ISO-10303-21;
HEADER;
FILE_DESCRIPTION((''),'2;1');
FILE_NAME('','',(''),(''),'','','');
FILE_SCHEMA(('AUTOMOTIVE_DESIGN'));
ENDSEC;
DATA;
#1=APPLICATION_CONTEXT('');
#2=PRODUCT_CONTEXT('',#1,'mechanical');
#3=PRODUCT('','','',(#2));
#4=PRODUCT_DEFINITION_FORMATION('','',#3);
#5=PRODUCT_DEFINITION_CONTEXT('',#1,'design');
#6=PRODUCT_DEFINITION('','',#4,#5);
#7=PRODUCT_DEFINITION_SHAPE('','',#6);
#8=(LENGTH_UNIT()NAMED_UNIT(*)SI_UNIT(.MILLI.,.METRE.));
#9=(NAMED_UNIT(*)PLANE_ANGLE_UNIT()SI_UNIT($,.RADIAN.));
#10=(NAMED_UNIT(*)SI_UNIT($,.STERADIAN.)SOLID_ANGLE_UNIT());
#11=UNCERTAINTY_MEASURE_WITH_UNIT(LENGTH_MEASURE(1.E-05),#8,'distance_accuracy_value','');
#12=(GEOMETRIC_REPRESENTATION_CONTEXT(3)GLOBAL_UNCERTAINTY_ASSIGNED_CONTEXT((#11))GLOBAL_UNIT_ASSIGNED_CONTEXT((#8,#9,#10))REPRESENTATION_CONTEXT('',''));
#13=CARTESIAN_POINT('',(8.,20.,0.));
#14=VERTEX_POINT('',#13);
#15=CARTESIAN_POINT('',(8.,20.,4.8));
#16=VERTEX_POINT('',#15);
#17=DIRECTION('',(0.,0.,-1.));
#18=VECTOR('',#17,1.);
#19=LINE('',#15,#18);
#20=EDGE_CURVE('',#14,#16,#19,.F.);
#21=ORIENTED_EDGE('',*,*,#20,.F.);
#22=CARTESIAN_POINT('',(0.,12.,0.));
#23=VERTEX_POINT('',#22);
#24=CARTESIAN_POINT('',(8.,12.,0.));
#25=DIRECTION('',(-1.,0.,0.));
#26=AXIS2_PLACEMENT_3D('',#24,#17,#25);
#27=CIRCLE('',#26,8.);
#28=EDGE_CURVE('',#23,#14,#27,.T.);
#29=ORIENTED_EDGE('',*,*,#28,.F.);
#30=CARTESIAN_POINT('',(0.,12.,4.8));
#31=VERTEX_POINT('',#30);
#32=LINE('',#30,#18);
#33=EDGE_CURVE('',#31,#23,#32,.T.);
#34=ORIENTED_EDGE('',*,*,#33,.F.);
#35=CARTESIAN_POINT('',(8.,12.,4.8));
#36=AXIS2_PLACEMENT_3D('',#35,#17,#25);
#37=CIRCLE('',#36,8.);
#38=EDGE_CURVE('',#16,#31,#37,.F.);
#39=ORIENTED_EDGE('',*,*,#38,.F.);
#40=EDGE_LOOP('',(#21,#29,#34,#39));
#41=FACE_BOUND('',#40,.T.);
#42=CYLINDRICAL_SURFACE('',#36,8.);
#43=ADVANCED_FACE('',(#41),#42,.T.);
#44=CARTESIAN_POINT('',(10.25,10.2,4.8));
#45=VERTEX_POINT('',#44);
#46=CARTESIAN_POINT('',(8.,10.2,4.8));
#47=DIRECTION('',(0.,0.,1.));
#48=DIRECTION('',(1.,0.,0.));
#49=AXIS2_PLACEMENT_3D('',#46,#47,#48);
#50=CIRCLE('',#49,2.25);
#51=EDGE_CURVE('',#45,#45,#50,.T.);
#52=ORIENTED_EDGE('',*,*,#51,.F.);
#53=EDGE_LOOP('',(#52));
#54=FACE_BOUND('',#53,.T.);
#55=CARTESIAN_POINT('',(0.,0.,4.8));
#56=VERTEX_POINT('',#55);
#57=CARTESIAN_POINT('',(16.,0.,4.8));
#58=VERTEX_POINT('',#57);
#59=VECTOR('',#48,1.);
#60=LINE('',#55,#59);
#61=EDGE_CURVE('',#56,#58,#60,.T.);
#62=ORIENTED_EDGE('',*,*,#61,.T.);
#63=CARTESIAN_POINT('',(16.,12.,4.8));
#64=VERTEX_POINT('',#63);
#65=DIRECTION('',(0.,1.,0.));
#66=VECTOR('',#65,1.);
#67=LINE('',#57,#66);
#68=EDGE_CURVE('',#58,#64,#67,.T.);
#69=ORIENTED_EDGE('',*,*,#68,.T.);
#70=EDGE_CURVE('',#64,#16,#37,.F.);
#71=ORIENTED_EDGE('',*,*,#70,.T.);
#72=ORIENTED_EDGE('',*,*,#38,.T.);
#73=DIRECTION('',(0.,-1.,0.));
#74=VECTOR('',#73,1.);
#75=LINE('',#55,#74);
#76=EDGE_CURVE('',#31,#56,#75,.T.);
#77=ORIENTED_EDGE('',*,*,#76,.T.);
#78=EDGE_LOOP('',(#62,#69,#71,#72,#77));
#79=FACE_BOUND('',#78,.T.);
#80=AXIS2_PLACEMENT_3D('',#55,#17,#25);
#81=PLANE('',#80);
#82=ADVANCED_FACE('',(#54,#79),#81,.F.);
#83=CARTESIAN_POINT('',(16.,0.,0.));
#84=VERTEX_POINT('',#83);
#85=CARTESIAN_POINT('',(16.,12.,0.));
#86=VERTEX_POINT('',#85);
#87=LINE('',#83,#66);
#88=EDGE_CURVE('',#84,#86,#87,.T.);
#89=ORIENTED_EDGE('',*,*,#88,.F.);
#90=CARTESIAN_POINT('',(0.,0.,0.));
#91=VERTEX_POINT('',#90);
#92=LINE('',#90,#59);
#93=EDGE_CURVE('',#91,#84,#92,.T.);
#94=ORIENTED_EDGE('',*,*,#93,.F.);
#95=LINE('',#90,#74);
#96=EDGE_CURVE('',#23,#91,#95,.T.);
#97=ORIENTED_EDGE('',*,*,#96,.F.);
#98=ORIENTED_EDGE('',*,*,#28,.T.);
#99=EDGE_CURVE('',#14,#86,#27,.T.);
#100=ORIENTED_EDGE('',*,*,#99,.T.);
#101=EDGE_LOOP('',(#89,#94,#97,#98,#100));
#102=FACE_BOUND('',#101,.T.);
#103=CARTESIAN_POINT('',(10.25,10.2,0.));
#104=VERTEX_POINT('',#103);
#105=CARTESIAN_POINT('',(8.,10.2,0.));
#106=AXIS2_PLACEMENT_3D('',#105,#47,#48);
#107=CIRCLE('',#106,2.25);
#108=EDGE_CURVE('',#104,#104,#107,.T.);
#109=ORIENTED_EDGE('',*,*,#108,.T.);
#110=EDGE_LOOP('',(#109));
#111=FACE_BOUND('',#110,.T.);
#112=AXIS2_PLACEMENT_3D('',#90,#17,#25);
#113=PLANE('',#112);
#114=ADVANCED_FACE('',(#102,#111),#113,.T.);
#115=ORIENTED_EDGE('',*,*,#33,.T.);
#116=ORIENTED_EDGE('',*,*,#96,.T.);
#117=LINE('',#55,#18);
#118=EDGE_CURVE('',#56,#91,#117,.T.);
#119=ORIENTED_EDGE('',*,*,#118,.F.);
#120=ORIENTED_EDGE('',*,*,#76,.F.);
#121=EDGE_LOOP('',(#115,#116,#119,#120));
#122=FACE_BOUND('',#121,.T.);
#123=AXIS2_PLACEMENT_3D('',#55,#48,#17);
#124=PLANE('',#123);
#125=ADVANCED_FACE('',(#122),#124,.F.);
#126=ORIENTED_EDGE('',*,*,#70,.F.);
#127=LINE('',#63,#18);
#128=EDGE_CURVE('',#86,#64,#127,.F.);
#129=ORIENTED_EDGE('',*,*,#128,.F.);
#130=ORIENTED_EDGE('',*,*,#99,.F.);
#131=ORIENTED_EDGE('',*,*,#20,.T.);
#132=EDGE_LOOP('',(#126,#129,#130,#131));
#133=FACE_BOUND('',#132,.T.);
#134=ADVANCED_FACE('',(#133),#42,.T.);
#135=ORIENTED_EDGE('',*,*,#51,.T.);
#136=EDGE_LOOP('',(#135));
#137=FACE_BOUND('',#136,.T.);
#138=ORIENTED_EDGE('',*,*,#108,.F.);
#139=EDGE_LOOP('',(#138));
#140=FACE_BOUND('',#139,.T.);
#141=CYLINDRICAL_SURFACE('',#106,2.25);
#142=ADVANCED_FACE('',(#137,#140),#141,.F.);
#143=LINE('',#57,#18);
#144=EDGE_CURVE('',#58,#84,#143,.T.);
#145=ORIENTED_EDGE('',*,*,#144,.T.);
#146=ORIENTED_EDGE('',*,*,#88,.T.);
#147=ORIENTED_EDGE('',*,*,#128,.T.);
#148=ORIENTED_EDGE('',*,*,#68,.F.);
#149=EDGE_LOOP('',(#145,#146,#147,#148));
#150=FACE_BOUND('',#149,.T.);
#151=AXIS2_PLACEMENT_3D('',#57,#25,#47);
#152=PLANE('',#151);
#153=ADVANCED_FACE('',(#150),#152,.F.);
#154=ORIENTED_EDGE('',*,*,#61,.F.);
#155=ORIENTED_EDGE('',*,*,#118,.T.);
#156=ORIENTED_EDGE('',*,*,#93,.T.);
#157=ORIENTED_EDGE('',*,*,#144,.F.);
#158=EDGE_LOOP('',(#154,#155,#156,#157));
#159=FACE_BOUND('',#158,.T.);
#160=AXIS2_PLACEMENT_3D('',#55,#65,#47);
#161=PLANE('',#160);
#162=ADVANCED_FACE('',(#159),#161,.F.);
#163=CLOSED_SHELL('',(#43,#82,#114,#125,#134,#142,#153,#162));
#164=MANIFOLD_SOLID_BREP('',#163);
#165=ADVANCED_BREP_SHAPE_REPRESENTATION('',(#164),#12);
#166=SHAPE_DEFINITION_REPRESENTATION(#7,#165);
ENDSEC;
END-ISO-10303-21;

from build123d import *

# Parameters (mm, degrees)
SKETCH1_W           = 16
SKETCH1_H           = 20
BOSS_EXTRUDE1_DEPTH = 4.8
SKETCH2_R           = 2.25
CUT_EXTRUDE1_DEPTH  = 27.05839596
FILLET1_R           = 8


with BuildPart() as part:
    # Sketch1 → Boss-Extrude1 (new body)
    with BuildSketch(Plane.XY):
        with Locations((8, 10)):
            Rectangle(SKETCH1_W, SKETCH1_H)
    extrude(amount=BOSS_EXTRUDE1_DEPTH)

    # Sketch2 → Cut-Extrude1 (cut, through all)
    with BuildSketch(Plane.XY.offset(4.8)):
        with Locations((8, 10.2)):
            Circle(SKETCH2_R)
    extrude(amount=-CUT_EXTRUDE1_DEPTH, mode=Mode.SUBTRACT)

    # Fillet1
    fillet1_edges = [part.edges().sort_by_distance(p)[0] for p in [
        (16, 20, 2.4),
        (0, 20, 2.4),
    ]]
    fillet(fillet1_edges, radius=FILLET1_R - 0.0001)  # a hair under: the kernel refuses the full size


solid = part.part
